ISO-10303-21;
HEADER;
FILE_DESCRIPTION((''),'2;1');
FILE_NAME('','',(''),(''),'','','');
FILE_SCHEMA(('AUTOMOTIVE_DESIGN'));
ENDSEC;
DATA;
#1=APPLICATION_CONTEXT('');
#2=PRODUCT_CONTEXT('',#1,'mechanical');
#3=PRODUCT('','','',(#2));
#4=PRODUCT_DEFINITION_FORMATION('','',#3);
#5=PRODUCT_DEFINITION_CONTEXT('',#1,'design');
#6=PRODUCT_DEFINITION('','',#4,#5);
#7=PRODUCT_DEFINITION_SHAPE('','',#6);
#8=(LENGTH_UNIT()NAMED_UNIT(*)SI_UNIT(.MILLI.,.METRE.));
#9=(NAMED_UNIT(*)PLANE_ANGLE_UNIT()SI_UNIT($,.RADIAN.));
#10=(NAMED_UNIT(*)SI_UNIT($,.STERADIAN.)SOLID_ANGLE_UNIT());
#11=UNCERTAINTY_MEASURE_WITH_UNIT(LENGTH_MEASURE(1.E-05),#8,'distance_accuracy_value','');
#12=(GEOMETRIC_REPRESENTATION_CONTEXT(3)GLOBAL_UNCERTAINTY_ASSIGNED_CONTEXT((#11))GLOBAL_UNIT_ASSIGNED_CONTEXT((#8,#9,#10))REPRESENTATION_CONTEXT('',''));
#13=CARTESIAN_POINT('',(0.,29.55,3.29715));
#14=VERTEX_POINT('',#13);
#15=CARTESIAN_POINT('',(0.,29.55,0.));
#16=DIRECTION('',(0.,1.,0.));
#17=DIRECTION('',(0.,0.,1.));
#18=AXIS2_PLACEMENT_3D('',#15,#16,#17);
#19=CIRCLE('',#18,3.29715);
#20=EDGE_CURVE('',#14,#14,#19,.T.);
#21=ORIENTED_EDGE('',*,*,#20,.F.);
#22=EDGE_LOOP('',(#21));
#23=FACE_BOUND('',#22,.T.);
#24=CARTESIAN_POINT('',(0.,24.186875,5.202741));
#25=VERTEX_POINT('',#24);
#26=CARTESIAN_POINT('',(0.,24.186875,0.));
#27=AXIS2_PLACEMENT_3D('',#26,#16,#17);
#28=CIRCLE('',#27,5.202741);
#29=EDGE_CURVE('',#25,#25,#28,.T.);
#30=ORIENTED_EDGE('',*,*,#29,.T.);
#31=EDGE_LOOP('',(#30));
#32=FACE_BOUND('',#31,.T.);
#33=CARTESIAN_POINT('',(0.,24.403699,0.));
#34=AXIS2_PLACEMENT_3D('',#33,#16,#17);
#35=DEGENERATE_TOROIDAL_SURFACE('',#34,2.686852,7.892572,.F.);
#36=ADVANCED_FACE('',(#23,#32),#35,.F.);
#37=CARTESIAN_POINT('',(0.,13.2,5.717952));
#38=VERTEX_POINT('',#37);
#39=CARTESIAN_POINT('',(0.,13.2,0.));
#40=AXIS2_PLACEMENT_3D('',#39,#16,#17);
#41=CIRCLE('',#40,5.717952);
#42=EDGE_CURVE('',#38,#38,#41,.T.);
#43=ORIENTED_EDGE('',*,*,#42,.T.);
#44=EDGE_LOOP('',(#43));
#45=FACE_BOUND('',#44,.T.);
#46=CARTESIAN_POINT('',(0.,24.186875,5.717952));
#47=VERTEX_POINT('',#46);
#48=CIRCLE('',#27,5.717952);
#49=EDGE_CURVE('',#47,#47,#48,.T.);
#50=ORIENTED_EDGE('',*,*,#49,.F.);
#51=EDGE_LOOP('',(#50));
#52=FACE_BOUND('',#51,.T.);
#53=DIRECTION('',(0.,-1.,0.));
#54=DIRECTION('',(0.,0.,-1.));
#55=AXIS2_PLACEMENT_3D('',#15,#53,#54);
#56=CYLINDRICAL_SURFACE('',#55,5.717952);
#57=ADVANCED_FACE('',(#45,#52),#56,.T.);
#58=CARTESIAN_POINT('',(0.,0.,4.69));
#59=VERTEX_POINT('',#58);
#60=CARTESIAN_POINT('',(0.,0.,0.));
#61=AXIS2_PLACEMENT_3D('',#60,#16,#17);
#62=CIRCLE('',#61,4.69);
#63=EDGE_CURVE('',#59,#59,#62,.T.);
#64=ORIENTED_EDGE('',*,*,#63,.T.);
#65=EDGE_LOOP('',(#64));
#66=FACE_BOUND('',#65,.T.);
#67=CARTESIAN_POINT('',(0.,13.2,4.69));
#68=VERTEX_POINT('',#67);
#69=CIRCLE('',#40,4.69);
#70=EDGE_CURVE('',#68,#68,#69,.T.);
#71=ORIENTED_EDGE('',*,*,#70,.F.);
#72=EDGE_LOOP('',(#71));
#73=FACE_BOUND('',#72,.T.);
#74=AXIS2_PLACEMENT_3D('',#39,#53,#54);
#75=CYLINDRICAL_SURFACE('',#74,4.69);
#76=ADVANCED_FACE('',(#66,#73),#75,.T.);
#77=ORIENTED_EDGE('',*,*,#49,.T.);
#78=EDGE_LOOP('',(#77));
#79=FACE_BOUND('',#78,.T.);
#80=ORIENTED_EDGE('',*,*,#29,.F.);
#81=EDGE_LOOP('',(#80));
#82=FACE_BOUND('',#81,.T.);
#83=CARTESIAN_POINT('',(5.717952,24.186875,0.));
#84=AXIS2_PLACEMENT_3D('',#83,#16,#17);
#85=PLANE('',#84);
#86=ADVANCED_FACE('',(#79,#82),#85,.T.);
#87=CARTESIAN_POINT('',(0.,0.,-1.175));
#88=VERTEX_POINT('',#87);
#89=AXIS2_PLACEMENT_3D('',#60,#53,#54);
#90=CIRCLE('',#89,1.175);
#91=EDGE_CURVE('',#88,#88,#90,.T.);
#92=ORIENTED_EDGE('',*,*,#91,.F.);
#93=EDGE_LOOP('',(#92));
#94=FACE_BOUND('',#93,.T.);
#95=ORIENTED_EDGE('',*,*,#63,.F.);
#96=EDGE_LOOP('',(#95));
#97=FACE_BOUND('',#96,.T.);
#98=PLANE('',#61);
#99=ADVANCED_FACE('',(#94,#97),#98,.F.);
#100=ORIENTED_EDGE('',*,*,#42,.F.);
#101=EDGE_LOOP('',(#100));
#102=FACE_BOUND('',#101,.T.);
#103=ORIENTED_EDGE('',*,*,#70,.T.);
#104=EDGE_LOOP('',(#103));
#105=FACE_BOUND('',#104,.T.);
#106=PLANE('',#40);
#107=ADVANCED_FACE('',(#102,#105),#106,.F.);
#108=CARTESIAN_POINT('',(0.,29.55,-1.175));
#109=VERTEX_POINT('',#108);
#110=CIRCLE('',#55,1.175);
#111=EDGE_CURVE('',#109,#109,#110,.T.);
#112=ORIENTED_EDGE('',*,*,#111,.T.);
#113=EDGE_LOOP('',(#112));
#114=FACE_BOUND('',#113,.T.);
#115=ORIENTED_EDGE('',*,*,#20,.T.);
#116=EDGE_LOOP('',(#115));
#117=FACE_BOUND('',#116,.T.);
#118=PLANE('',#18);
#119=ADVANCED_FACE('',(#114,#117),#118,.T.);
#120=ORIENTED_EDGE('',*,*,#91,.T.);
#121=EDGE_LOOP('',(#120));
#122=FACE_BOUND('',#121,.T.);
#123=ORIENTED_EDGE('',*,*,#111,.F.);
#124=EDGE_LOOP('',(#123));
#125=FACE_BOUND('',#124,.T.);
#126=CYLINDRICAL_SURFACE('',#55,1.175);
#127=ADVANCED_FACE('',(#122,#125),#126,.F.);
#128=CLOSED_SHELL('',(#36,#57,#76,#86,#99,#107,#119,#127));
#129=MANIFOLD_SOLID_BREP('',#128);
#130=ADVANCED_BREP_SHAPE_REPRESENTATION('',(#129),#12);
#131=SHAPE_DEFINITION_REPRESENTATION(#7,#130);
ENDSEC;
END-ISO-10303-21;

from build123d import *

# Parameters (mm, degrees)
SKETCH1_R           = 4.69
BOSS_EXTRUDE1_DEPTH = 13.2
SKETCH2_R           = 5.717952417
BOSS_EXTRUDE2_DEPTH = 16.35
SKETCH4_R           = 1.175
CUT_EXTRUDE1_DEPTH  = 31.636456479


with BuildPart() as part:
    # Sketch1 → Boss-Extrude1 (new body)
    with BuildSketch(Plane(origin=(0, 0, 0), x_dir=(1, 0, 0), z_dir=(0, 1, 0))):
        with Locations(Location((0, 0, 0), (0, 0, 270))):
            Circle(SKETCH1_R)
    extrude(amount=BOSS_EXTRUDE1_DEPTH)

    # Sketch2 → Boss-Extrude2 (add)
    with BuildSketch(Plane(origin=(0, 13.2, 0), x_dir=(1, 0, 0), z_dir=(0, 1, 0))):
        with Locations(Location((0, 0, 0), (0, 0, 270))):
            Circle(SKETCH2_R)
    extrude(amount=BOSS_EXTRUDE2_DEPTH)

    # Sketch3 → Cut-Revolve1 (revolve, cut)
    with BuildSketch(Plane.XY, mode=Mode.PRIVATE) as cut_revolve1_sk:
        with BuildLine():
            Line((3.297149576, 29.55), (5.717952417, 29.55))
            Line((5.717952417, 29.55), (5.717952417, 24.186874615))
            Line((5.717952417, 24.186874615), (5.202740875, 24.186874615))
            ThreePointArc((5.202740875, 24.186874615), (4.750212863, 27.046189194), (3.297149576, 29.55))
        make_face()
    revolve(cut_revolve1_sk.sketch.rotate(Axis((0, 29.55, 0), (0, -1, 0)), 90), axis=Axis((0, 29.55, 0), (0, -1, 0)), mode=Mode.SUBTRACT)

    # Sketch4 → Cut-Extrude1 (cut, through all)
    with BuildSketch(Plane.XZ):
        with Locations(Location((0, 0, 0), (0, 0, 270))):
            Circle(SKETCH4_R)
    extrude(amount=-CUT_EXTRUDE1_DEPTH, mode=Mode.SUBTRACT)


solid = part.part
